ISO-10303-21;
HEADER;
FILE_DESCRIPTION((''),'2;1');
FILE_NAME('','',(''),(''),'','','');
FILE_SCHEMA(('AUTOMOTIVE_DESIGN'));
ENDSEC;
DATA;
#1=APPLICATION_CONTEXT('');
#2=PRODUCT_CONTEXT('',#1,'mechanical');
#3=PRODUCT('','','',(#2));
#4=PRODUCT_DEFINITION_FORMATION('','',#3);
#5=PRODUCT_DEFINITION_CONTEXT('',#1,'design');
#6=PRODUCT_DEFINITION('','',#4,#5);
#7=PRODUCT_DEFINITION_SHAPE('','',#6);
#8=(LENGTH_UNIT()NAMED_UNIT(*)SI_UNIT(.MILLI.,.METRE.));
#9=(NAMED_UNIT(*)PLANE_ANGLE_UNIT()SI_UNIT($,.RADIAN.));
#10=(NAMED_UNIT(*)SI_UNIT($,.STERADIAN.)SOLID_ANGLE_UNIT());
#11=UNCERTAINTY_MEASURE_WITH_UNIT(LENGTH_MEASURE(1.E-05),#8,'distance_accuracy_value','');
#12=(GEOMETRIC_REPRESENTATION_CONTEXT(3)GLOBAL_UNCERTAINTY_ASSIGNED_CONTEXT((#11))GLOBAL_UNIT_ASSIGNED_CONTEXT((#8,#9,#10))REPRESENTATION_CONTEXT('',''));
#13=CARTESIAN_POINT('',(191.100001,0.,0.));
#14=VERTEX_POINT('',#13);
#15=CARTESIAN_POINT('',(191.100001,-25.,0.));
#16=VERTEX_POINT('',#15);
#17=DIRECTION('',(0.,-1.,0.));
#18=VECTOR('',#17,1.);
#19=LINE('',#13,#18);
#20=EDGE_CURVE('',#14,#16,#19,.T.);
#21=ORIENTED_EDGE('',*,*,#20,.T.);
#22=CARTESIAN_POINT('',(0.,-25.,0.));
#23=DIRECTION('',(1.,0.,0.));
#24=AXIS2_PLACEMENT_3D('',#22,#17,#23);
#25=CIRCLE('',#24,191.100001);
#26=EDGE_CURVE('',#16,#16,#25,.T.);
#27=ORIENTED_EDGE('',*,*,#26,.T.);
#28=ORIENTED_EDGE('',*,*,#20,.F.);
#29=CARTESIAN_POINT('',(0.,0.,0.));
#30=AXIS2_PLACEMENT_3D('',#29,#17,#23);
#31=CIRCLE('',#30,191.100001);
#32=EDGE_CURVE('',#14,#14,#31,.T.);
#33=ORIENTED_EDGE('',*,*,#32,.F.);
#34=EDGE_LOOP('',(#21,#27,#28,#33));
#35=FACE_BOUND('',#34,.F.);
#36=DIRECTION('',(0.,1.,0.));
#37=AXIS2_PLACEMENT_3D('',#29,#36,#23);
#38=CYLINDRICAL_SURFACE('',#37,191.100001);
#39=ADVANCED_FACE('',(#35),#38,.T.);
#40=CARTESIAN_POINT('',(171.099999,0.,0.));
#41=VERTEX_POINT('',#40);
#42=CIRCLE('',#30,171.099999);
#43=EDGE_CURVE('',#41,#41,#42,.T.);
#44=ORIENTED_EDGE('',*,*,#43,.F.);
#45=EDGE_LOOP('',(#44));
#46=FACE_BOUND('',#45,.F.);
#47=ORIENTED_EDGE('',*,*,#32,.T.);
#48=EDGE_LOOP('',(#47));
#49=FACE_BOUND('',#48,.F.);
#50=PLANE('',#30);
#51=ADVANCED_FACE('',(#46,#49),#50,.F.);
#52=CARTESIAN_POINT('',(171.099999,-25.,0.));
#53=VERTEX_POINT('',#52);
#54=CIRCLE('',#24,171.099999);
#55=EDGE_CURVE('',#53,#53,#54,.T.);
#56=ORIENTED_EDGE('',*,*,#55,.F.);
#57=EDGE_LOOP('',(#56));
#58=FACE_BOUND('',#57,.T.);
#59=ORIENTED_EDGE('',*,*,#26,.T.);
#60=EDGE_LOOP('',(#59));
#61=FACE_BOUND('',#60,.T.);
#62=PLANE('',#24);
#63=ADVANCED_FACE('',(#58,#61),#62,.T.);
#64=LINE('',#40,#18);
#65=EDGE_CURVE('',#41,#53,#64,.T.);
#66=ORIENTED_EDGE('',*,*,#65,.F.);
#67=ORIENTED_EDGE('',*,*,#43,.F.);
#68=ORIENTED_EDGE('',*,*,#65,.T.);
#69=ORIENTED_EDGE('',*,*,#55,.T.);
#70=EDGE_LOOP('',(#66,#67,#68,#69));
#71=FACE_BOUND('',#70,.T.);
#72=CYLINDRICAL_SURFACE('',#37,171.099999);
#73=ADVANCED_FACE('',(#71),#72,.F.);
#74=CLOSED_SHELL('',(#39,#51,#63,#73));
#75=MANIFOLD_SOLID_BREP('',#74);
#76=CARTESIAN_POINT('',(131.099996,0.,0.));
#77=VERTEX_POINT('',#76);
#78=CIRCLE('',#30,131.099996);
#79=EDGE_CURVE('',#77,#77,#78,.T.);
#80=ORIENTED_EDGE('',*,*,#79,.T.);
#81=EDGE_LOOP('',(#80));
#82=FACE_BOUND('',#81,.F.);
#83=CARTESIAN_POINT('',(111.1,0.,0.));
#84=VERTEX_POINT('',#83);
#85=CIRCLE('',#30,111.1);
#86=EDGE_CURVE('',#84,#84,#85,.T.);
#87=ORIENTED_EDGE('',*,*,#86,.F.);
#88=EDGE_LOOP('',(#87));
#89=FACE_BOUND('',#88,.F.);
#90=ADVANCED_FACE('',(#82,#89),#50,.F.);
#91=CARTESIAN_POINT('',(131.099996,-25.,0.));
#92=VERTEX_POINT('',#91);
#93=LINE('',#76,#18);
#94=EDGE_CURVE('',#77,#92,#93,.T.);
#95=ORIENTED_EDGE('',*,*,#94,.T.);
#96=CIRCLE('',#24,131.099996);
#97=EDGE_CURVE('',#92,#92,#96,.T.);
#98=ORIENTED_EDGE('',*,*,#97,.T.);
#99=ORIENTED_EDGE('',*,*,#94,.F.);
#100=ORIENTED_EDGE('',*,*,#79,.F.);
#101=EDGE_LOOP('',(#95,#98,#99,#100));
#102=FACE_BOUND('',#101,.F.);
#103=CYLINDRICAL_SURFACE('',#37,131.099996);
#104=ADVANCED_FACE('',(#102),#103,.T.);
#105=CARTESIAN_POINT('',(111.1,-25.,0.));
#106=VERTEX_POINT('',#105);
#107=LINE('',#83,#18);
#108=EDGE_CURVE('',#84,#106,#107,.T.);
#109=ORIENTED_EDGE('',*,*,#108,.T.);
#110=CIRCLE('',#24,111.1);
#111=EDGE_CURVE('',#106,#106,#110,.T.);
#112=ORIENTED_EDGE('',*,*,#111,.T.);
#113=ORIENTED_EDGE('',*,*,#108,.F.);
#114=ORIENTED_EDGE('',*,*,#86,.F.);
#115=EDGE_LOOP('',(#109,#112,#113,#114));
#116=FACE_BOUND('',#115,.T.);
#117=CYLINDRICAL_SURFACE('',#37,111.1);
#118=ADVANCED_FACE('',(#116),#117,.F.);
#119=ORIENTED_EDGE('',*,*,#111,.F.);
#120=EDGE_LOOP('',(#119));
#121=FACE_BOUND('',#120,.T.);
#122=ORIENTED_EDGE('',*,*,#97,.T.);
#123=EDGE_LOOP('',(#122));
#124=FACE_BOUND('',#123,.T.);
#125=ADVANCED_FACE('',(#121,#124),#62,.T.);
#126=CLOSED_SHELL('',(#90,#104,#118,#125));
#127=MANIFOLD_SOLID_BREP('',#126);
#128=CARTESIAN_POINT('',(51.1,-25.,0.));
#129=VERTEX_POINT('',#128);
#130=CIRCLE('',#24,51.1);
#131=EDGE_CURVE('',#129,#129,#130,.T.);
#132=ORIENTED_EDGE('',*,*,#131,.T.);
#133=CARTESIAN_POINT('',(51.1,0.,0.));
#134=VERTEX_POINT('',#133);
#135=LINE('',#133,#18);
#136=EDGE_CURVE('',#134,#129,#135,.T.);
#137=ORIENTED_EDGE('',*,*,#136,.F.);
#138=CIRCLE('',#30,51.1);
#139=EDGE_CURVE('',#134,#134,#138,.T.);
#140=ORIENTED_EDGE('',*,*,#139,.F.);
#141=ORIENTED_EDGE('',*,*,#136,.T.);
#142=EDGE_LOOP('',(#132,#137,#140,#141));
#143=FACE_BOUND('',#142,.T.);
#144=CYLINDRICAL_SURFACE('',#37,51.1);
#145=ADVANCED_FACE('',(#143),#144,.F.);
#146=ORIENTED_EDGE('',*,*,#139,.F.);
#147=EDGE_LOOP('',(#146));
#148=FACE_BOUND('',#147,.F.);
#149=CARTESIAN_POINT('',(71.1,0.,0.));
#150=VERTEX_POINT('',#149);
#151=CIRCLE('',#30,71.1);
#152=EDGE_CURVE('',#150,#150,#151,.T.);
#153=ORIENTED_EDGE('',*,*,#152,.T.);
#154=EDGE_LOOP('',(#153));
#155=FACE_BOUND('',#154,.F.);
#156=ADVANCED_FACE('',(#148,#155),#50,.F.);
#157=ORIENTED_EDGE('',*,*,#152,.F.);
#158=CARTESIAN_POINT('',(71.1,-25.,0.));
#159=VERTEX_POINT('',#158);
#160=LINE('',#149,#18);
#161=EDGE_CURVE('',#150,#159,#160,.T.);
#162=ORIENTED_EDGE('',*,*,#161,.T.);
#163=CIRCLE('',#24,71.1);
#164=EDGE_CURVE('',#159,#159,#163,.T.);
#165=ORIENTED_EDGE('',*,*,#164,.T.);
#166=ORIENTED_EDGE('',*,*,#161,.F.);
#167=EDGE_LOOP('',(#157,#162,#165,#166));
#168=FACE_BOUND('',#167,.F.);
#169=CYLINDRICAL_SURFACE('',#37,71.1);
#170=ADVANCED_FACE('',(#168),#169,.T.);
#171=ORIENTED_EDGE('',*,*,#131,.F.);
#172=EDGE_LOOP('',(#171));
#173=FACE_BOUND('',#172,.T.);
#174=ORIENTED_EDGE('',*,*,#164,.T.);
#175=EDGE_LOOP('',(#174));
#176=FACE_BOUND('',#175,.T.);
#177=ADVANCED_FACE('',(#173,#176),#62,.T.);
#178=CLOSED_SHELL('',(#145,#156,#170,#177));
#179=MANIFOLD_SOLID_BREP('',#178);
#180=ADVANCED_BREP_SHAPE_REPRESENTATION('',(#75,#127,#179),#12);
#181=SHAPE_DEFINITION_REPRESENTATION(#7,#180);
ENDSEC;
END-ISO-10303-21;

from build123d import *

# Parameters (mm, degrees)
F0_R     = 191.1000013351
F0_R_2   = 171.0999992129
F1_DEPTH = 25
F0_R_3   = 71.1000000685
F0_R_4   = 51.0999997705
F0_R_5   = 131.0999962257
F0_R_6   = 111.1000000685


with BuildPart() as f1:
    # F0 (on Front) → F1 (new body)
    with BuildSketch(Plane.XZ):
        Circle(F0_R)
        Circle(F0_R_2, mode=Mode.SUBTRACT)
    extrude(amount=F1_DEPTH)


with BuildPart() as f1b:
    # F0 (on Front) → F1, piece 2 (new body)
    with BuildSketch(Plane.XZ):
        Circle(F0_R_3)
        Circle(F0_R_4, mode=Mode.SUBTRACT)
    extrude(amount=F1_DEPTH)


with BuildPart() as f1c:
    # F0 (on Front) → F1, piece 3 (new body)
    with BuildSketch(Plane.XZ):
        Circle(F0_R_5)
        Circle(F0_R_6, mode=Mode.SUBTRACT)
    extrude(amount=F1_DEPTH)


solid = Compound([f1.part, f1b.part, f1c.part])
